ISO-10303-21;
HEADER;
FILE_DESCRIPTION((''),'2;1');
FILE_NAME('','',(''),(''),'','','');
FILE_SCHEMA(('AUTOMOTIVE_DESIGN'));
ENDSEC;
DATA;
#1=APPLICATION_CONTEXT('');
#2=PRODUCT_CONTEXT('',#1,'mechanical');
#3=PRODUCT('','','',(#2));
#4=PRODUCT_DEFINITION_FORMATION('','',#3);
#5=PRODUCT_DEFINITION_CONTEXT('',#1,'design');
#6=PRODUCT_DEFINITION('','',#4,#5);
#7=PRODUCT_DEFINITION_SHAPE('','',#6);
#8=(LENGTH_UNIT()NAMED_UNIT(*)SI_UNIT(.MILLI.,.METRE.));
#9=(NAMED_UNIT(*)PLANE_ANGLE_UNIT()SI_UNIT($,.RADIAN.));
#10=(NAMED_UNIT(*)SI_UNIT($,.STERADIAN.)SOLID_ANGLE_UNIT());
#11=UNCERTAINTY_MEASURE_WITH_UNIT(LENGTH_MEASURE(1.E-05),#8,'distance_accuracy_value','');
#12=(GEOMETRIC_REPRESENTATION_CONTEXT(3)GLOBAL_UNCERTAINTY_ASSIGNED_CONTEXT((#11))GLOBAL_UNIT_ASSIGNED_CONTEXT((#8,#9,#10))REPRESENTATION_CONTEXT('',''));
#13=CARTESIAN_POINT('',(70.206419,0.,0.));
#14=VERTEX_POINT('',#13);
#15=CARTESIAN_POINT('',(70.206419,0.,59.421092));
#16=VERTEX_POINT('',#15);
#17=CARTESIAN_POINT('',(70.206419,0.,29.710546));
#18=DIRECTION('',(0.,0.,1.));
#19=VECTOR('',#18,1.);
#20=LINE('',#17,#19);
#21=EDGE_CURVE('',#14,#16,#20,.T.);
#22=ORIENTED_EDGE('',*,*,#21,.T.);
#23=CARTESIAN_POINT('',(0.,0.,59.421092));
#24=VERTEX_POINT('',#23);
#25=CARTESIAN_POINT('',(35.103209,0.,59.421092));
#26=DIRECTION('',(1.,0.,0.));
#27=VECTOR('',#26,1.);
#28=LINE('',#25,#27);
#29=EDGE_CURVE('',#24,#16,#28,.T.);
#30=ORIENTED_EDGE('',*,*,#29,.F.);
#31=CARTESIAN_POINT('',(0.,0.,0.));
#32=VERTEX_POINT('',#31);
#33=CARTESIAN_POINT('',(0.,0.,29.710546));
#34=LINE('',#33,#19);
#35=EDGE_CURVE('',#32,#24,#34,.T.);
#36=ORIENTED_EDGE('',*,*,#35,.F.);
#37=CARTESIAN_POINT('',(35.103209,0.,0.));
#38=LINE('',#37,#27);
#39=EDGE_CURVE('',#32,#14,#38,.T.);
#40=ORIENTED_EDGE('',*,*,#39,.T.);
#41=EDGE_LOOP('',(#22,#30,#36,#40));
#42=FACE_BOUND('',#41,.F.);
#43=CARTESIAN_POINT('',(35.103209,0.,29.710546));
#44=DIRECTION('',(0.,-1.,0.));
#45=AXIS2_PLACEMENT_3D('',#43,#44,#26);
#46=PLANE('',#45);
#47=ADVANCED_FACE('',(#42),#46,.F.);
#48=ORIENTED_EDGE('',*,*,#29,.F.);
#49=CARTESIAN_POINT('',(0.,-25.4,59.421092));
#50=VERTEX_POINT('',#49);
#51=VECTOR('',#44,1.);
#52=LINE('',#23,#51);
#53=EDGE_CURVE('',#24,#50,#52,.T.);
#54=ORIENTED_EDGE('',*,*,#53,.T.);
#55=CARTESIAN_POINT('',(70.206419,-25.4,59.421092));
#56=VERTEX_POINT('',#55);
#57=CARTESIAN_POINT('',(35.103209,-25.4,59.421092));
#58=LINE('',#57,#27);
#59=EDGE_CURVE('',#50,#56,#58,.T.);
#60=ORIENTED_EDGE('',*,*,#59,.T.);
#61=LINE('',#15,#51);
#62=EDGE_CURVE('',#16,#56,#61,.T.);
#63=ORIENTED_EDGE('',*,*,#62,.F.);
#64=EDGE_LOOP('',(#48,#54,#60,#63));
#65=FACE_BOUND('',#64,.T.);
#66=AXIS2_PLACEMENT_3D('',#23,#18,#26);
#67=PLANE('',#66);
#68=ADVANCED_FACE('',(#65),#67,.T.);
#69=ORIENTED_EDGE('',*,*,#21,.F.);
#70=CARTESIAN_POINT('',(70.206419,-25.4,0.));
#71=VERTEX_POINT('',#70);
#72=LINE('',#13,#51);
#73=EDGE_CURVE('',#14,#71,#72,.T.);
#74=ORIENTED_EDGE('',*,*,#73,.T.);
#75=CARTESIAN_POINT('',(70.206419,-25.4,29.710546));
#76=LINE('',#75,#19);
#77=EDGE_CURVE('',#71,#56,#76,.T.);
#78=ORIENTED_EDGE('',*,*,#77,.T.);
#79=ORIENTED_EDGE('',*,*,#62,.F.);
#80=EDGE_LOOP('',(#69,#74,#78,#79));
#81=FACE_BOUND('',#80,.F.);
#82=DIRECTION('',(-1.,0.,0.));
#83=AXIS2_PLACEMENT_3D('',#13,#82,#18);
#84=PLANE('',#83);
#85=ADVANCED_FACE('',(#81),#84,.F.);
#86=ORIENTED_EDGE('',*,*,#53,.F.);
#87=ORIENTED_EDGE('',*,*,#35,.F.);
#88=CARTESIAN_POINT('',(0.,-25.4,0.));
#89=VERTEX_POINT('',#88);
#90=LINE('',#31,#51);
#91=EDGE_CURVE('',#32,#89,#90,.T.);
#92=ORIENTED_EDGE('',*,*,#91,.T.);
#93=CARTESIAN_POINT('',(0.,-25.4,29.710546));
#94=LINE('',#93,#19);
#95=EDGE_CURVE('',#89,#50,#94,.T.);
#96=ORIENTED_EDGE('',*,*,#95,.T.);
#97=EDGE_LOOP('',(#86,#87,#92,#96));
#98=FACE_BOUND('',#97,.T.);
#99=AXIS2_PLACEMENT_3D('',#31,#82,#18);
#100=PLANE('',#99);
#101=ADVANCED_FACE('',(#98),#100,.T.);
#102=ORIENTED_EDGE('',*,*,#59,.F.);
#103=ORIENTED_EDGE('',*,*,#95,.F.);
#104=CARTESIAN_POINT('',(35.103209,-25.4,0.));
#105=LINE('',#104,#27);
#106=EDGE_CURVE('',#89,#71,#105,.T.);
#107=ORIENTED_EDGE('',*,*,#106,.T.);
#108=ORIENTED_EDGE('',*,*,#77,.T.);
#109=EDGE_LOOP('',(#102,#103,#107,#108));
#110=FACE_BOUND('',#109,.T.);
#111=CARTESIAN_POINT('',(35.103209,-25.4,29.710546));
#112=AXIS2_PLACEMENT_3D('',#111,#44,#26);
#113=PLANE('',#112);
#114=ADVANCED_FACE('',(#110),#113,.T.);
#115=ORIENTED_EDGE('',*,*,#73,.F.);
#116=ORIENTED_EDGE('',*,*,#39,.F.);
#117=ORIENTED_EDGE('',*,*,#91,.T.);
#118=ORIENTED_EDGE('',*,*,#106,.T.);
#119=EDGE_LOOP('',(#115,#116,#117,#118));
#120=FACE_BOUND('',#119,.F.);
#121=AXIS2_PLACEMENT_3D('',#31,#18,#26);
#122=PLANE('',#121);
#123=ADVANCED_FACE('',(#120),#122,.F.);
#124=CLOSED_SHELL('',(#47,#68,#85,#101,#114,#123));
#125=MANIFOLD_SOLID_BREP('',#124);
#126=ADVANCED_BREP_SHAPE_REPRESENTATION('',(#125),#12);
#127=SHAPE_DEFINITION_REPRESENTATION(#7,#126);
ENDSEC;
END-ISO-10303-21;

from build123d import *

# Parameters (mm, degrees)
F0_W     = 70.2064186335
F0_H     = 59.4210922718
F2_DEPTH = 25.4
F3_DEPTH = 12.9629038274


# Not quite as in the source:
# - the program builds the solid bodies; features that only make, move or delete a surface that nothing else refers to are left out


with BuildPart() as f2:
    # F0 (on Front) → F2 (new body)
    with BuildSketch(Plane.XZ):
        with Locations((35.1032093167, 29.7105461359)):
            Rectangle(F0_W, F0_H)
    extrude(amount=F2_DEPTH)

    # F1 (on face) → F3 (join)
    with BuildSketch(Plane.XZ):
        with BuildLine():
            Line((25.4531949759, 29.8861153424), (40.9622192383, 44.9872016907))
            ThreePointArc((40.9622192383, 44.9872016907), (18.2216341505, 52.8275624371), (25.4531949759, 29.8861153424))
        make_face()
    extrude(amount=F3_DEPTH)


solid = f2.part
